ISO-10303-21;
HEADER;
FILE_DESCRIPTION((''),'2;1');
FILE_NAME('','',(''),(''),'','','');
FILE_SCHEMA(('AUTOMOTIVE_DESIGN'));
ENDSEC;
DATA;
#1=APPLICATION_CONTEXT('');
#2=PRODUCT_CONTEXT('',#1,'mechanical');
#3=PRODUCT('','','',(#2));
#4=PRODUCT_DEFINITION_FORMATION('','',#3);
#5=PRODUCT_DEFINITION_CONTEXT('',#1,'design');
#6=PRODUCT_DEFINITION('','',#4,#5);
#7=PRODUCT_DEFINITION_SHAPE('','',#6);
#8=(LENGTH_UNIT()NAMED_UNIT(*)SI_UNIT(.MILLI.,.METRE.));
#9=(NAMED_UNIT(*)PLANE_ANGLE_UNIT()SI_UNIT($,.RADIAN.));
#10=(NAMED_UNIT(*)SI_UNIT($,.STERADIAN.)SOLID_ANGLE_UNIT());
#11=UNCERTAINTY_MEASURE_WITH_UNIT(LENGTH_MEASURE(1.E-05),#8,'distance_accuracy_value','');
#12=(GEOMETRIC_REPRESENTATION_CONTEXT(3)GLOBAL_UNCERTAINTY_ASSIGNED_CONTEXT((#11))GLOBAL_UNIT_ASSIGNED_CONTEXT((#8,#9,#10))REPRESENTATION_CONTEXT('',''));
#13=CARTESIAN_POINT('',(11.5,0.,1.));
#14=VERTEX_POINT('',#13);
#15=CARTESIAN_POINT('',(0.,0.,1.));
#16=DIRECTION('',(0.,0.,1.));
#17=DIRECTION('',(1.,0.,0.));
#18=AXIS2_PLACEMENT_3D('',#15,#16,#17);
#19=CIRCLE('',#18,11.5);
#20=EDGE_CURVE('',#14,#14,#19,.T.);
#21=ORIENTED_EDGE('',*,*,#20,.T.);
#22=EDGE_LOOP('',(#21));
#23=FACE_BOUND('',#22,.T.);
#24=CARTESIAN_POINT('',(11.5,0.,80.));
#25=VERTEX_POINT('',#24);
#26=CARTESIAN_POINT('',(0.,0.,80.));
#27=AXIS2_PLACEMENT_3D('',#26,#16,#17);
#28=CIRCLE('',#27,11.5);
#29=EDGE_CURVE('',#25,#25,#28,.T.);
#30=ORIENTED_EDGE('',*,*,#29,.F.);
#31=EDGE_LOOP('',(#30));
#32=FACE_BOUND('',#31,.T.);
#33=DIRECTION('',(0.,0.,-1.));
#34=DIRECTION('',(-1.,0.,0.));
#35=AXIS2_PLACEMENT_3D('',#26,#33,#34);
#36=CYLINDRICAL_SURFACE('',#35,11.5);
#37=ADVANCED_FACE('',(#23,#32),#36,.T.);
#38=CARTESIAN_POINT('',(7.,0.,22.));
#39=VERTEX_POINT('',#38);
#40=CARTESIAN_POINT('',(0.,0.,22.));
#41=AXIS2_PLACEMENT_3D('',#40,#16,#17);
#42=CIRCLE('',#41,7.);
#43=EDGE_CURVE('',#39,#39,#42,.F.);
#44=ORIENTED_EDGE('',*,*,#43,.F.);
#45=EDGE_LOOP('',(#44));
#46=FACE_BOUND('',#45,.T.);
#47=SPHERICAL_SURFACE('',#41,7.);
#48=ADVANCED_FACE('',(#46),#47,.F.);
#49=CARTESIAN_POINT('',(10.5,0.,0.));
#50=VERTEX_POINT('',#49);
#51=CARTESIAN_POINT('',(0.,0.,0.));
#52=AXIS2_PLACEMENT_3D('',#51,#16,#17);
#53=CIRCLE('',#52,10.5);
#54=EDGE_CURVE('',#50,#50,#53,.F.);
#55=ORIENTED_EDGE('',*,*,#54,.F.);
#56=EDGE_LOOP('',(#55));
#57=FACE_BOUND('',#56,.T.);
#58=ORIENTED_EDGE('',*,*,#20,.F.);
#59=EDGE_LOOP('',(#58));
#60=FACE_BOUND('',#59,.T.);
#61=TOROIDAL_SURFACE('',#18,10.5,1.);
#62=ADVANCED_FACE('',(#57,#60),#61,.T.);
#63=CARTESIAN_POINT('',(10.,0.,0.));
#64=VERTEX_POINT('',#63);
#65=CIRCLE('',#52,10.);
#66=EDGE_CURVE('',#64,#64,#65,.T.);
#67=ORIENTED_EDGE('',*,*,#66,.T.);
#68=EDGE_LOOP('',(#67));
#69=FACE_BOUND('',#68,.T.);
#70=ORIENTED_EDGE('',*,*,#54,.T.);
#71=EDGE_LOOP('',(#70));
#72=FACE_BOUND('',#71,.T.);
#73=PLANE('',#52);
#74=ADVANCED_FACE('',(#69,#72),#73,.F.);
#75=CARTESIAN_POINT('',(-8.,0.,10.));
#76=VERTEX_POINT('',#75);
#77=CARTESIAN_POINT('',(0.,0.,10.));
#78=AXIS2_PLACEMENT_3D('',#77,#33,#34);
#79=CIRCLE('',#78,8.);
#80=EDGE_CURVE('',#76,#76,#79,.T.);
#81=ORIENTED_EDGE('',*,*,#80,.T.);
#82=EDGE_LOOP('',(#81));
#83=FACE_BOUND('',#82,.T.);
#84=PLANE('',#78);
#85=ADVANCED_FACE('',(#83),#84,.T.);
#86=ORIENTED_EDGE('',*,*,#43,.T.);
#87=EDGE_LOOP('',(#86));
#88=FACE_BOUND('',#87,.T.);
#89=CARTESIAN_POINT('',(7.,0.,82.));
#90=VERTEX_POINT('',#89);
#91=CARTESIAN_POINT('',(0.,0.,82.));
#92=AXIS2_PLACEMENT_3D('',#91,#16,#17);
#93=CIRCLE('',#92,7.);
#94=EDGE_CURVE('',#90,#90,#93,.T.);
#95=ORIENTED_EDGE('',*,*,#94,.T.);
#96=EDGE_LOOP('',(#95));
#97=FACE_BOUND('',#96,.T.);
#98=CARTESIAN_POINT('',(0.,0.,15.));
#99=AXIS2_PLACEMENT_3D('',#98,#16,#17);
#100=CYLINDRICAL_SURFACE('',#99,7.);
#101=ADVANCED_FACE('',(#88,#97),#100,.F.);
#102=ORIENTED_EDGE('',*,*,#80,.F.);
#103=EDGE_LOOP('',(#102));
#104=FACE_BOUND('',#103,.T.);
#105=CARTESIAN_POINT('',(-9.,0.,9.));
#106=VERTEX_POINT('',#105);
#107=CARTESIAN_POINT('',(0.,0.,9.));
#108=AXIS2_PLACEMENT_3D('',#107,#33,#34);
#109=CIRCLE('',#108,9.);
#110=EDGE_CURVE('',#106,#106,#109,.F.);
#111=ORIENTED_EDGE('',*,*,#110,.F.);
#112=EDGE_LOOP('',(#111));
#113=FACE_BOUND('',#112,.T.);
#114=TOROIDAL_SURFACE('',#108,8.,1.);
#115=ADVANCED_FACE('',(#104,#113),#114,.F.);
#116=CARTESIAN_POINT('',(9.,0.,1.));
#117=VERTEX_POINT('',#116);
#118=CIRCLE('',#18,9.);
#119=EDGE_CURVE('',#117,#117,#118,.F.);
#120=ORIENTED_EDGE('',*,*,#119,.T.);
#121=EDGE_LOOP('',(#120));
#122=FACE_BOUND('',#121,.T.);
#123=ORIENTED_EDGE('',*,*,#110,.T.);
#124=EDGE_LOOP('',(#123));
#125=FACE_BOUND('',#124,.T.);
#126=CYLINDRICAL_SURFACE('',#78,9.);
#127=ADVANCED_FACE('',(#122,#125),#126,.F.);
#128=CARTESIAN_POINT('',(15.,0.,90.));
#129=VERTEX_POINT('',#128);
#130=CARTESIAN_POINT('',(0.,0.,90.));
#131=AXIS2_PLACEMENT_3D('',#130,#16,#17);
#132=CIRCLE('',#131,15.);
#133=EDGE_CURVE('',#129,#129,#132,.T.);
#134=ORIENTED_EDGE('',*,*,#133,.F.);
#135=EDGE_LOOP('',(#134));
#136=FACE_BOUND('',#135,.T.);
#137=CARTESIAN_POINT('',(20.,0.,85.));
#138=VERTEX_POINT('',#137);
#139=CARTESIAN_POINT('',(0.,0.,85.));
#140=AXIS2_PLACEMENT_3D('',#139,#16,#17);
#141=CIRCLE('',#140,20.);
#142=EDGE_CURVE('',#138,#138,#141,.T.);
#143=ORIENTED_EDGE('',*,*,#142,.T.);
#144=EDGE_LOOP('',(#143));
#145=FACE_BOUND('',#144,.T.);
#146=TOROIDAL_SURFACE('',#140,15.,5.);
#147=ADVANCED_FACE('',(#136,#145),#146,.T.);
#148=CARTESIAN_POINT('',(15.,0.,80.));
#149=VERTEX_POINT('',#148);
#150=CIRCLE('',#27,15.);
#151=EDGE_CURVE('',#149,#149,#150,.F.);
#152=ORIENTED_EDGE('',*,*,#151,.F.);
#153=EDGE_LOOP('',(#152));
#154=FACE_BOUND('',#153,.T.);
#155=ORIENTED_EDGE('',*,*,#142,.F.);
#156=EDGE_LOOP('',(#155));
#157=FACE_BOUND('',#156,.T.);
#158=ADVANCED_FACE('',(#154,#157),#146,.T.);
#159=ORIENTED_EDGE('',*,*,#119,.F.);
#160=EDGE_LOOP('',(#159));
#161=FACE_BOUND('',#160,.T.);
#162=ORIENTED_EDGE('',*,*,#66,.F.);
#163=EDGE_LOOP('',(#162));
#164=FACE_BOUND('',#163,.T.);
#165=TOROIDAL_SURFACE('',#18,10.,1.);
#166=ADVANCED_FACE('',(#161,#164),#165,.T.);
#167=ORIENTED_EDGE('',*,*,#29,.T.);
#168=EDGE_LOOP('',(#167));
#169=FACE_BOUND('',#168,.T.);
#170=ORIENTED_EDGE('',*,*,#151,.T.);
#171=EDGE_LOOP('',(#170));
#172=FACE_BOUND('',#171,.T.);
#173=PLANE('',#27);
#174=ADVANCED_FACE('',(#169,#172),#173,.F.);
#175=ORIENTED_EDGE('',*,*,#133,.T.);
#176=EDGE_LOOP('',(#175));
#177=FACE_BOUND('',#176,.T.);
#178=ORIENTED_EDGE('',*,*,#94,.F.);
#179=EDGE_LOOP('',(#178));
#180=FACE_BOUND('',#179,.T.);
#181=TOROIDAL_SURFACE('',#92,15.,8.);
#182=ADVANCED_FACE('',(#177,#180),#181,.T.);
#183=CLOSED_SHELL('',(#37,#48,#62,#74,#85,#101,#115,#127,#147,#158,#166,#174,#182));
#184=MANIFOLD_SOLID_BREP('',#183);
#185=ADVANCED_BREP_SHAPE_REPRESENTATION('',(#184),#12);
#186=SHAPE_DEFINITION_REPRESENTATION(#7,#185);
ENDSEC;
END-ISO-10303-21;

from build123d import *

# Parameters (mm, degrees)
SKIZZE1_R                       = 11.5
AUFSATZ_LINEAR_AUSTRAGEN3_DEPTH = 80
SKIZZE4_R                       = 9
SCHNITT_LINEAR_AUSTRAGEN2_DEPTH = 10
VERRUNDUNG1_R                   = 1
VERRUNDUNG2_R                   = 1
SKIZZE5_R                       = 20
AUFSATZ_LINEAR_AUSTRAGEN4_DEPTH = 10
VERRUNDUNG3_R                   = 5
SKIZZE6_R                       = 7
SCHNITT_LINEAR_AUSTRAGEN3_DEPTH = 75
VERRUNDUNG4_R                   = 7
VERRUNDUNG5_R                   = 8


with BuildPart() as part:
    # Skizze1 → Aufsatz-Linear austragen3 (new body)
    with BuildSketch(Plane.XY):
        Circle(SKIZZE1_R)
    extrude(amount=AUFSATZ_LINEAR_AUSTRAGEN3_DEPTH)

    # Skizze4 → Schnitt-Linear austragen2 (cut)
    with BuildSketch(Plane(origin=(0, 0, 0), x_dir=(-1, 0, 0), z_dir=(0, 0, -1))):
        Circle(SKIZZE4_R)
    extrude(amount=-SCHNITT_LINEAR_AUSTRAGEN2_DEPTH, mode=Mode.SUBTRACT)

    # Verrundung1
    verrundung1_edges = [part.edges().sort_by_distance(p)[0] for p in [
        (-11.5, 0, 0),
        (9, 0, 0),
    ]]
    fillet(verrundung1_edges, radius=VERRUNDUNG1_R)

    # Verrundung2
    verrundung2_edges = [part.edges().sort_by_distance(p)[0] for p in [
        (9, 0, 10),
    ]]
    fillet(verrundung2_edges, radius=VERRUNDUNG2_R)

    # Skizze5 → Aufsatz-Linear austragen4 (add)
    with BuildSketch(Plane.XY.offset(80)):
        Circle(SKIZZE5_R)
    extrude(amount=AUFSATZ_LINEAR_AUSTRAGEN4_DEPTH)

    # Verrundung3
    verrundung3_edges = [part.edges().sort_by_distance(p)[0] for p in [
        (-20, 0, 80),
        (-20, 0, 90),
    ]]
    fillet(verrundung3_edges, radius=VERRUNDUNG3_R - 0.0001)  # a hair under: the kernel refuses the full size

    # Skizze6 → Schnitt-Linear austragen3 (cut)
    with BuildSketch(Plane.XY.offset(90)):
        Circle(SKIZZE6_R)
    extrude(amount=-SCHNITT_LINEAR_AUSTRAGEN3_DEPTH, mode=Mode.SUBTRACT)

    # Verrundung4
    verrundung4_edges = [part.edges().sort_by_distance(p)[0] for p in [
        (-7, 0, 15),
    ]]
    fillet(verrundung4_edges, radius=VERRUNDUNG4_R)

    # Verrundung5
    verrundung5_edges = [part.edges().sort_by_distance(p)[0] for p in [
        (-7, 0, 90),
    ]]
    fillet(verrundung5_edges, radius=VERRUNDUNG5_R)


solid = part.part
